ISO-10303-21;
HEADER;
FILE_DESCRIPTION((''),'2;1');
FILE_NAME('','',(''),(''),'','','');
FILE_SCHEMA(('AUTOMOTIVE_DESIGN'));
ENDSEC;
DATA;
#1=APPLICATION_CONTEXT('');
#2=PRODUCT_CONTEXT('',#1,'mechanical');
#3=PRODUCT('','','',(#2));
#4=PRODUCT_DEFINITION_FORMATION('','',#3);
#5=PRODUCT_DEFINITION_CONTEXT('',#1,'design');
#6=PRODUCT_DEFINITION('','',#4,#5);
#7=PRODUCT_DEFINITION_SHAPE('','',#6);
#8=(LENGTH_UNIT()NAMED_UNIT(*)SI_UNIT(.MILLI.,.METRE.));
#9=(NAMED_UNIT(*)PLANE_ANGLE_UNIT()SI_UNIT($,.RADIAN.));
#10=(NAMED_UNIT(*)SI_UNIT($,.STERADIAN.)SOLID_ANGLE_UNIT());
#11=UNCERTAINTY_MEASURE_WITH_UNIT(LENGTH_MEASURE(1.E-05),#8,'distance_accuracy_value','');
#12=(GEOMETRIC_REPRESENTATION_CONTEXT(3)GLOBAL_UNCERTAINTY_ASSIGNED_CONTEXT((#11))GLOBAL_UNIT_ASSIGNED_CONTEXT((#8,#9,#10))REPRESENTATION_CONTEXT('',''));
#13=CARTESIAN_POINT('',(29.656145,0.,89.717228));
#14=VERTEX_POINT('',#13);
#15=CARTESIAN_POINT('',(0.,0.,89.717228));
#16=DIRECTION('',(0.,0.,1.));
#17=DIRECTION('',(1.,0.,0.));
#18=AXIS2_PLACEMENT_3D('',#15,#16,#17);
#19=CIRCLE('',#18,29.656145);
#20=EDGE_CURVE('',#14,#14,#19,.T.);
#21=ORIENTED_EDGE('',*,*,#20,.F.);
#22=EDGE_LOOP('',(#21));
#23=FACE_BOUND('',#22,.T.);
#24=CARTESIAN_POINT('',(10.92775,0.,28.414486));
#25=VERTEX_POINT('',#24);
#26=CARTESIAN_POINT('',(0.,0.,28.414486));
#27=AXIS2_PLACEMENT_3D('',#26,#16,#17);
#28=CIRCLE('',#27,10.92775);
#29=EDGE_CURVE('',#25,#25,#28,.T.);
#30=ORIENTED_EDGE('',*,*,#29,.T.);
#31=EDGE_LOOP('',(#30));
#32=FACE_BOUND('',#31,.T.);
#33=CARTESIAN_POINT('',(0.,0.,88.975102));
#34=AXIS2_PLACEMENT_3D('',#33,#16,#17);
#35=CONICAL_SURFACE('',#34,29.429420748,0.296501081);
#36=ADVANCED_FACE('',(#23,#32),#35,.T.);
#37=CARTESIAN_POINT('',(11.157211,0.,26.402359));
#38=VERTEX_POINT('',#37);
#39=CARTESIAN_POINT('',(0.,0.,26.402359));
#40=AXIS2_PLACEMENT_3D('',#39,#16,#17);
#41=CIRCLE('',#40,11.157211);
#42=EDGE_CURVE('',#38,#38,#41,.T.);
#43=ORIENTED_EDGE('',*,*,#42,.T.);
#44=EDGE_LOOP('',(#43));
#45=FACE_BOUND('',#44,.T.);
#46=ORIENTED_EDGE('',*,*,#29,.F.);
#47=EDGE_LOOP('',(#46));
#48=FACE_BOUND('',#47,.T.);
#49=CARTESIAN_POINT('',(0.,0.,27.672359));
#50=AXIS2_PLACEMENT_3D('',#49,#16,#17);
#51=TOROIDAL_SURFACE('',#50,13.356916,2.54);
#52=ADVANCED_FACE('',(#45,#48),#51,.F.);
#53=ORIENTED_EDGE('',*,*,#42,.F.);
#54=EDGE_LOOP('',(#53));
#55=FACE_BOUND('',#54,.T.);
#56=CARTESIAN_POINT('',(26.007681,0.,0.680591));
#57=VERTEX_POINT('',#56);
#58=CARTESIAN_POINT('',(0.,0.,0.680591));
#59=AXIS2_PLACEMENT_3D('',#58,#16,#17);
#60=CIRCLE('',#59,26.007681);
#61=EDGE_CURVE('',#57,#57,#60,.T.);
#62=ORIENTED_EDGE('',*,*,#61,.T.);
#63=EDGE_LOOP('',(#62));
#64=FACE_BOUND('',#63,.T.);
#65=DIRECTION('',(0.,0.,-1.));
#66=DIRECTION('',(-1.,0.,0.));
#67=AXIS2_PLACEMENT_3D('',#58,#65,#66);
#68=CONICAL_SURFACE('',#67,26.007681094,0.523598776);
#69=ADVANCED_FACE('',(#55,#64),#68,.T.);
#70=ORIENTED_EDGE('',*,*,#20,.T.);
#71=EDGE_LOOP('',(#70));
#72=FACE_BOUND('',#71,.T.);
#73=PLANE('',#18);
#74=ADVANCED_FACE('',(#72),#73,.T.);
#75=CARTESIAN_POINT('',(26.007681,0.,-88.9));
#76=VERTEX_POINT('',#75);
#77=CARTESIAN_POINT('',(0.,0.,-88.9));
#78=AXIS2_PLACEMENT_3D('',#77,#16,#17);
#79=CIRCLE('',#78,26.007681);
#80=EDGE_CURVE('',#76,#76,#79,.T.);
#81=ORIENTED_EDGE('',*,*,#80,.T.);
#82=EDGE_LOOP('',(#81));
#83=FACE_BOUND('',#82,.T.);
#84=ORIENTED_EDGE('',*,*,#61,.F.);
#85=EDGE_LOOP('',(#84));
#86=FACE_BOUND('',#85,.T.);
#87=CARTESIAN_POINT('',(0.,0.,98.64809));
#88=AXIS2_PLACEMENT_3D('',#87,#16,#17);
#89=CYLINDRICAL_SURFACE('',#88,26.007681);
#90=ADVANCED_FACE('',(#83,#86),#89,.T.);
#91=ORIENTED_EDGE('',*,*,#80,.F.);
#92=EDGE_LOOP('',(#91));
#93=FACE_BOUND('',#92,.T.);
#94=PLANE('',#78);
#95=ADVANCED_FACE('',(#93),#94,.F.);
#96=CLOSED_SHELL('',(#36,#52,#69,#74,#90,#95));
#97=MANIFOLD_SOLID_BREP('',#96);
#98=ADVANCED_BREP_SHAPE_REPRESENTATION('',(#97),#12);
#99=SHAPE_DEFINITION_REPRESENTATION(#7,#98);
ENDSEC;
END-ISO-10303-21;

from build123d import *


# Read off the part's stored shape, not the designer's step: Revolve4
with BuildPart() as part:
    # Sketch2 → Revolve1 (revolve)
    with BuildSketch(Plane(origin=(0, 0, 0), x_dir=(1, 0, 0), z_dir=(0, 1, 0)), mode=Mode.PRIVATE) as revolve1_sk:
        with BuildLine():
            Line((0, 88.9), (-23.467681094, 88.9))
            Line((-23.467681094, 88.9), (-23.467681094, 0))
            Line((-23.467681094, 0), (-8.405449734, -26.088549992))
            ThreePointArc((-8.405449734, -26.088549992), (-8.081511216, -27.07075529), (-8.175988072, -28.10067642))
            Line((-8.175988072, -28.10067642), (-27.000254561, -89.717228424))
            Line((-27.000254561, -89.717228424), (0, -89.717228424))
            Line((0, -89.717228424), (0, 88.9))
        make_face()
    revolve(revolve1_sk.sketch.rotate(Axis((0, 0, 0), (0, 0, -1)), 180), axis=Axis((0, 0, 0), (0, 0, -1)))

    # Revolve4 outline → Revolve4 (revolve)
    with BuildSketch(Plane.XZ):
        with BuildLine():
            Line((23.467681094, -88.9), (26.007681094, -88.9))
            Line((26.007681094, -88.9), (26.007681094, 0.680590949))
            Line((26.007681094, 0.680590949), (11.157211277, 26.402359187))
            ThreePointArc((11.157211277, 26.402359187), (10.83327276, 27.384564486), (10.927749616, 28.414485616))
            Line((10.927749616, 28.414485616), (29.656145308, 89.717228424))
            Line((29.656145308, 89.717228424), (27.000254561, 89.717228424))
            Line((27.000254561, 89.717228424), (8.175988072, 28.10067642))
            ThreePointArc((8.175988072, 28.10067642), (8.081511216, 27.07075529), (8.405449734, 26.088549992))
            Line((8.405449734, 26.088549992), (23.467681094, 0))
            Line((23.467681094, 0), (23.467681094, -88.9))
        make_face()
    revolve(axis=Axis((0, 0, 0), (0, 0, 1)))


solid = part.part
